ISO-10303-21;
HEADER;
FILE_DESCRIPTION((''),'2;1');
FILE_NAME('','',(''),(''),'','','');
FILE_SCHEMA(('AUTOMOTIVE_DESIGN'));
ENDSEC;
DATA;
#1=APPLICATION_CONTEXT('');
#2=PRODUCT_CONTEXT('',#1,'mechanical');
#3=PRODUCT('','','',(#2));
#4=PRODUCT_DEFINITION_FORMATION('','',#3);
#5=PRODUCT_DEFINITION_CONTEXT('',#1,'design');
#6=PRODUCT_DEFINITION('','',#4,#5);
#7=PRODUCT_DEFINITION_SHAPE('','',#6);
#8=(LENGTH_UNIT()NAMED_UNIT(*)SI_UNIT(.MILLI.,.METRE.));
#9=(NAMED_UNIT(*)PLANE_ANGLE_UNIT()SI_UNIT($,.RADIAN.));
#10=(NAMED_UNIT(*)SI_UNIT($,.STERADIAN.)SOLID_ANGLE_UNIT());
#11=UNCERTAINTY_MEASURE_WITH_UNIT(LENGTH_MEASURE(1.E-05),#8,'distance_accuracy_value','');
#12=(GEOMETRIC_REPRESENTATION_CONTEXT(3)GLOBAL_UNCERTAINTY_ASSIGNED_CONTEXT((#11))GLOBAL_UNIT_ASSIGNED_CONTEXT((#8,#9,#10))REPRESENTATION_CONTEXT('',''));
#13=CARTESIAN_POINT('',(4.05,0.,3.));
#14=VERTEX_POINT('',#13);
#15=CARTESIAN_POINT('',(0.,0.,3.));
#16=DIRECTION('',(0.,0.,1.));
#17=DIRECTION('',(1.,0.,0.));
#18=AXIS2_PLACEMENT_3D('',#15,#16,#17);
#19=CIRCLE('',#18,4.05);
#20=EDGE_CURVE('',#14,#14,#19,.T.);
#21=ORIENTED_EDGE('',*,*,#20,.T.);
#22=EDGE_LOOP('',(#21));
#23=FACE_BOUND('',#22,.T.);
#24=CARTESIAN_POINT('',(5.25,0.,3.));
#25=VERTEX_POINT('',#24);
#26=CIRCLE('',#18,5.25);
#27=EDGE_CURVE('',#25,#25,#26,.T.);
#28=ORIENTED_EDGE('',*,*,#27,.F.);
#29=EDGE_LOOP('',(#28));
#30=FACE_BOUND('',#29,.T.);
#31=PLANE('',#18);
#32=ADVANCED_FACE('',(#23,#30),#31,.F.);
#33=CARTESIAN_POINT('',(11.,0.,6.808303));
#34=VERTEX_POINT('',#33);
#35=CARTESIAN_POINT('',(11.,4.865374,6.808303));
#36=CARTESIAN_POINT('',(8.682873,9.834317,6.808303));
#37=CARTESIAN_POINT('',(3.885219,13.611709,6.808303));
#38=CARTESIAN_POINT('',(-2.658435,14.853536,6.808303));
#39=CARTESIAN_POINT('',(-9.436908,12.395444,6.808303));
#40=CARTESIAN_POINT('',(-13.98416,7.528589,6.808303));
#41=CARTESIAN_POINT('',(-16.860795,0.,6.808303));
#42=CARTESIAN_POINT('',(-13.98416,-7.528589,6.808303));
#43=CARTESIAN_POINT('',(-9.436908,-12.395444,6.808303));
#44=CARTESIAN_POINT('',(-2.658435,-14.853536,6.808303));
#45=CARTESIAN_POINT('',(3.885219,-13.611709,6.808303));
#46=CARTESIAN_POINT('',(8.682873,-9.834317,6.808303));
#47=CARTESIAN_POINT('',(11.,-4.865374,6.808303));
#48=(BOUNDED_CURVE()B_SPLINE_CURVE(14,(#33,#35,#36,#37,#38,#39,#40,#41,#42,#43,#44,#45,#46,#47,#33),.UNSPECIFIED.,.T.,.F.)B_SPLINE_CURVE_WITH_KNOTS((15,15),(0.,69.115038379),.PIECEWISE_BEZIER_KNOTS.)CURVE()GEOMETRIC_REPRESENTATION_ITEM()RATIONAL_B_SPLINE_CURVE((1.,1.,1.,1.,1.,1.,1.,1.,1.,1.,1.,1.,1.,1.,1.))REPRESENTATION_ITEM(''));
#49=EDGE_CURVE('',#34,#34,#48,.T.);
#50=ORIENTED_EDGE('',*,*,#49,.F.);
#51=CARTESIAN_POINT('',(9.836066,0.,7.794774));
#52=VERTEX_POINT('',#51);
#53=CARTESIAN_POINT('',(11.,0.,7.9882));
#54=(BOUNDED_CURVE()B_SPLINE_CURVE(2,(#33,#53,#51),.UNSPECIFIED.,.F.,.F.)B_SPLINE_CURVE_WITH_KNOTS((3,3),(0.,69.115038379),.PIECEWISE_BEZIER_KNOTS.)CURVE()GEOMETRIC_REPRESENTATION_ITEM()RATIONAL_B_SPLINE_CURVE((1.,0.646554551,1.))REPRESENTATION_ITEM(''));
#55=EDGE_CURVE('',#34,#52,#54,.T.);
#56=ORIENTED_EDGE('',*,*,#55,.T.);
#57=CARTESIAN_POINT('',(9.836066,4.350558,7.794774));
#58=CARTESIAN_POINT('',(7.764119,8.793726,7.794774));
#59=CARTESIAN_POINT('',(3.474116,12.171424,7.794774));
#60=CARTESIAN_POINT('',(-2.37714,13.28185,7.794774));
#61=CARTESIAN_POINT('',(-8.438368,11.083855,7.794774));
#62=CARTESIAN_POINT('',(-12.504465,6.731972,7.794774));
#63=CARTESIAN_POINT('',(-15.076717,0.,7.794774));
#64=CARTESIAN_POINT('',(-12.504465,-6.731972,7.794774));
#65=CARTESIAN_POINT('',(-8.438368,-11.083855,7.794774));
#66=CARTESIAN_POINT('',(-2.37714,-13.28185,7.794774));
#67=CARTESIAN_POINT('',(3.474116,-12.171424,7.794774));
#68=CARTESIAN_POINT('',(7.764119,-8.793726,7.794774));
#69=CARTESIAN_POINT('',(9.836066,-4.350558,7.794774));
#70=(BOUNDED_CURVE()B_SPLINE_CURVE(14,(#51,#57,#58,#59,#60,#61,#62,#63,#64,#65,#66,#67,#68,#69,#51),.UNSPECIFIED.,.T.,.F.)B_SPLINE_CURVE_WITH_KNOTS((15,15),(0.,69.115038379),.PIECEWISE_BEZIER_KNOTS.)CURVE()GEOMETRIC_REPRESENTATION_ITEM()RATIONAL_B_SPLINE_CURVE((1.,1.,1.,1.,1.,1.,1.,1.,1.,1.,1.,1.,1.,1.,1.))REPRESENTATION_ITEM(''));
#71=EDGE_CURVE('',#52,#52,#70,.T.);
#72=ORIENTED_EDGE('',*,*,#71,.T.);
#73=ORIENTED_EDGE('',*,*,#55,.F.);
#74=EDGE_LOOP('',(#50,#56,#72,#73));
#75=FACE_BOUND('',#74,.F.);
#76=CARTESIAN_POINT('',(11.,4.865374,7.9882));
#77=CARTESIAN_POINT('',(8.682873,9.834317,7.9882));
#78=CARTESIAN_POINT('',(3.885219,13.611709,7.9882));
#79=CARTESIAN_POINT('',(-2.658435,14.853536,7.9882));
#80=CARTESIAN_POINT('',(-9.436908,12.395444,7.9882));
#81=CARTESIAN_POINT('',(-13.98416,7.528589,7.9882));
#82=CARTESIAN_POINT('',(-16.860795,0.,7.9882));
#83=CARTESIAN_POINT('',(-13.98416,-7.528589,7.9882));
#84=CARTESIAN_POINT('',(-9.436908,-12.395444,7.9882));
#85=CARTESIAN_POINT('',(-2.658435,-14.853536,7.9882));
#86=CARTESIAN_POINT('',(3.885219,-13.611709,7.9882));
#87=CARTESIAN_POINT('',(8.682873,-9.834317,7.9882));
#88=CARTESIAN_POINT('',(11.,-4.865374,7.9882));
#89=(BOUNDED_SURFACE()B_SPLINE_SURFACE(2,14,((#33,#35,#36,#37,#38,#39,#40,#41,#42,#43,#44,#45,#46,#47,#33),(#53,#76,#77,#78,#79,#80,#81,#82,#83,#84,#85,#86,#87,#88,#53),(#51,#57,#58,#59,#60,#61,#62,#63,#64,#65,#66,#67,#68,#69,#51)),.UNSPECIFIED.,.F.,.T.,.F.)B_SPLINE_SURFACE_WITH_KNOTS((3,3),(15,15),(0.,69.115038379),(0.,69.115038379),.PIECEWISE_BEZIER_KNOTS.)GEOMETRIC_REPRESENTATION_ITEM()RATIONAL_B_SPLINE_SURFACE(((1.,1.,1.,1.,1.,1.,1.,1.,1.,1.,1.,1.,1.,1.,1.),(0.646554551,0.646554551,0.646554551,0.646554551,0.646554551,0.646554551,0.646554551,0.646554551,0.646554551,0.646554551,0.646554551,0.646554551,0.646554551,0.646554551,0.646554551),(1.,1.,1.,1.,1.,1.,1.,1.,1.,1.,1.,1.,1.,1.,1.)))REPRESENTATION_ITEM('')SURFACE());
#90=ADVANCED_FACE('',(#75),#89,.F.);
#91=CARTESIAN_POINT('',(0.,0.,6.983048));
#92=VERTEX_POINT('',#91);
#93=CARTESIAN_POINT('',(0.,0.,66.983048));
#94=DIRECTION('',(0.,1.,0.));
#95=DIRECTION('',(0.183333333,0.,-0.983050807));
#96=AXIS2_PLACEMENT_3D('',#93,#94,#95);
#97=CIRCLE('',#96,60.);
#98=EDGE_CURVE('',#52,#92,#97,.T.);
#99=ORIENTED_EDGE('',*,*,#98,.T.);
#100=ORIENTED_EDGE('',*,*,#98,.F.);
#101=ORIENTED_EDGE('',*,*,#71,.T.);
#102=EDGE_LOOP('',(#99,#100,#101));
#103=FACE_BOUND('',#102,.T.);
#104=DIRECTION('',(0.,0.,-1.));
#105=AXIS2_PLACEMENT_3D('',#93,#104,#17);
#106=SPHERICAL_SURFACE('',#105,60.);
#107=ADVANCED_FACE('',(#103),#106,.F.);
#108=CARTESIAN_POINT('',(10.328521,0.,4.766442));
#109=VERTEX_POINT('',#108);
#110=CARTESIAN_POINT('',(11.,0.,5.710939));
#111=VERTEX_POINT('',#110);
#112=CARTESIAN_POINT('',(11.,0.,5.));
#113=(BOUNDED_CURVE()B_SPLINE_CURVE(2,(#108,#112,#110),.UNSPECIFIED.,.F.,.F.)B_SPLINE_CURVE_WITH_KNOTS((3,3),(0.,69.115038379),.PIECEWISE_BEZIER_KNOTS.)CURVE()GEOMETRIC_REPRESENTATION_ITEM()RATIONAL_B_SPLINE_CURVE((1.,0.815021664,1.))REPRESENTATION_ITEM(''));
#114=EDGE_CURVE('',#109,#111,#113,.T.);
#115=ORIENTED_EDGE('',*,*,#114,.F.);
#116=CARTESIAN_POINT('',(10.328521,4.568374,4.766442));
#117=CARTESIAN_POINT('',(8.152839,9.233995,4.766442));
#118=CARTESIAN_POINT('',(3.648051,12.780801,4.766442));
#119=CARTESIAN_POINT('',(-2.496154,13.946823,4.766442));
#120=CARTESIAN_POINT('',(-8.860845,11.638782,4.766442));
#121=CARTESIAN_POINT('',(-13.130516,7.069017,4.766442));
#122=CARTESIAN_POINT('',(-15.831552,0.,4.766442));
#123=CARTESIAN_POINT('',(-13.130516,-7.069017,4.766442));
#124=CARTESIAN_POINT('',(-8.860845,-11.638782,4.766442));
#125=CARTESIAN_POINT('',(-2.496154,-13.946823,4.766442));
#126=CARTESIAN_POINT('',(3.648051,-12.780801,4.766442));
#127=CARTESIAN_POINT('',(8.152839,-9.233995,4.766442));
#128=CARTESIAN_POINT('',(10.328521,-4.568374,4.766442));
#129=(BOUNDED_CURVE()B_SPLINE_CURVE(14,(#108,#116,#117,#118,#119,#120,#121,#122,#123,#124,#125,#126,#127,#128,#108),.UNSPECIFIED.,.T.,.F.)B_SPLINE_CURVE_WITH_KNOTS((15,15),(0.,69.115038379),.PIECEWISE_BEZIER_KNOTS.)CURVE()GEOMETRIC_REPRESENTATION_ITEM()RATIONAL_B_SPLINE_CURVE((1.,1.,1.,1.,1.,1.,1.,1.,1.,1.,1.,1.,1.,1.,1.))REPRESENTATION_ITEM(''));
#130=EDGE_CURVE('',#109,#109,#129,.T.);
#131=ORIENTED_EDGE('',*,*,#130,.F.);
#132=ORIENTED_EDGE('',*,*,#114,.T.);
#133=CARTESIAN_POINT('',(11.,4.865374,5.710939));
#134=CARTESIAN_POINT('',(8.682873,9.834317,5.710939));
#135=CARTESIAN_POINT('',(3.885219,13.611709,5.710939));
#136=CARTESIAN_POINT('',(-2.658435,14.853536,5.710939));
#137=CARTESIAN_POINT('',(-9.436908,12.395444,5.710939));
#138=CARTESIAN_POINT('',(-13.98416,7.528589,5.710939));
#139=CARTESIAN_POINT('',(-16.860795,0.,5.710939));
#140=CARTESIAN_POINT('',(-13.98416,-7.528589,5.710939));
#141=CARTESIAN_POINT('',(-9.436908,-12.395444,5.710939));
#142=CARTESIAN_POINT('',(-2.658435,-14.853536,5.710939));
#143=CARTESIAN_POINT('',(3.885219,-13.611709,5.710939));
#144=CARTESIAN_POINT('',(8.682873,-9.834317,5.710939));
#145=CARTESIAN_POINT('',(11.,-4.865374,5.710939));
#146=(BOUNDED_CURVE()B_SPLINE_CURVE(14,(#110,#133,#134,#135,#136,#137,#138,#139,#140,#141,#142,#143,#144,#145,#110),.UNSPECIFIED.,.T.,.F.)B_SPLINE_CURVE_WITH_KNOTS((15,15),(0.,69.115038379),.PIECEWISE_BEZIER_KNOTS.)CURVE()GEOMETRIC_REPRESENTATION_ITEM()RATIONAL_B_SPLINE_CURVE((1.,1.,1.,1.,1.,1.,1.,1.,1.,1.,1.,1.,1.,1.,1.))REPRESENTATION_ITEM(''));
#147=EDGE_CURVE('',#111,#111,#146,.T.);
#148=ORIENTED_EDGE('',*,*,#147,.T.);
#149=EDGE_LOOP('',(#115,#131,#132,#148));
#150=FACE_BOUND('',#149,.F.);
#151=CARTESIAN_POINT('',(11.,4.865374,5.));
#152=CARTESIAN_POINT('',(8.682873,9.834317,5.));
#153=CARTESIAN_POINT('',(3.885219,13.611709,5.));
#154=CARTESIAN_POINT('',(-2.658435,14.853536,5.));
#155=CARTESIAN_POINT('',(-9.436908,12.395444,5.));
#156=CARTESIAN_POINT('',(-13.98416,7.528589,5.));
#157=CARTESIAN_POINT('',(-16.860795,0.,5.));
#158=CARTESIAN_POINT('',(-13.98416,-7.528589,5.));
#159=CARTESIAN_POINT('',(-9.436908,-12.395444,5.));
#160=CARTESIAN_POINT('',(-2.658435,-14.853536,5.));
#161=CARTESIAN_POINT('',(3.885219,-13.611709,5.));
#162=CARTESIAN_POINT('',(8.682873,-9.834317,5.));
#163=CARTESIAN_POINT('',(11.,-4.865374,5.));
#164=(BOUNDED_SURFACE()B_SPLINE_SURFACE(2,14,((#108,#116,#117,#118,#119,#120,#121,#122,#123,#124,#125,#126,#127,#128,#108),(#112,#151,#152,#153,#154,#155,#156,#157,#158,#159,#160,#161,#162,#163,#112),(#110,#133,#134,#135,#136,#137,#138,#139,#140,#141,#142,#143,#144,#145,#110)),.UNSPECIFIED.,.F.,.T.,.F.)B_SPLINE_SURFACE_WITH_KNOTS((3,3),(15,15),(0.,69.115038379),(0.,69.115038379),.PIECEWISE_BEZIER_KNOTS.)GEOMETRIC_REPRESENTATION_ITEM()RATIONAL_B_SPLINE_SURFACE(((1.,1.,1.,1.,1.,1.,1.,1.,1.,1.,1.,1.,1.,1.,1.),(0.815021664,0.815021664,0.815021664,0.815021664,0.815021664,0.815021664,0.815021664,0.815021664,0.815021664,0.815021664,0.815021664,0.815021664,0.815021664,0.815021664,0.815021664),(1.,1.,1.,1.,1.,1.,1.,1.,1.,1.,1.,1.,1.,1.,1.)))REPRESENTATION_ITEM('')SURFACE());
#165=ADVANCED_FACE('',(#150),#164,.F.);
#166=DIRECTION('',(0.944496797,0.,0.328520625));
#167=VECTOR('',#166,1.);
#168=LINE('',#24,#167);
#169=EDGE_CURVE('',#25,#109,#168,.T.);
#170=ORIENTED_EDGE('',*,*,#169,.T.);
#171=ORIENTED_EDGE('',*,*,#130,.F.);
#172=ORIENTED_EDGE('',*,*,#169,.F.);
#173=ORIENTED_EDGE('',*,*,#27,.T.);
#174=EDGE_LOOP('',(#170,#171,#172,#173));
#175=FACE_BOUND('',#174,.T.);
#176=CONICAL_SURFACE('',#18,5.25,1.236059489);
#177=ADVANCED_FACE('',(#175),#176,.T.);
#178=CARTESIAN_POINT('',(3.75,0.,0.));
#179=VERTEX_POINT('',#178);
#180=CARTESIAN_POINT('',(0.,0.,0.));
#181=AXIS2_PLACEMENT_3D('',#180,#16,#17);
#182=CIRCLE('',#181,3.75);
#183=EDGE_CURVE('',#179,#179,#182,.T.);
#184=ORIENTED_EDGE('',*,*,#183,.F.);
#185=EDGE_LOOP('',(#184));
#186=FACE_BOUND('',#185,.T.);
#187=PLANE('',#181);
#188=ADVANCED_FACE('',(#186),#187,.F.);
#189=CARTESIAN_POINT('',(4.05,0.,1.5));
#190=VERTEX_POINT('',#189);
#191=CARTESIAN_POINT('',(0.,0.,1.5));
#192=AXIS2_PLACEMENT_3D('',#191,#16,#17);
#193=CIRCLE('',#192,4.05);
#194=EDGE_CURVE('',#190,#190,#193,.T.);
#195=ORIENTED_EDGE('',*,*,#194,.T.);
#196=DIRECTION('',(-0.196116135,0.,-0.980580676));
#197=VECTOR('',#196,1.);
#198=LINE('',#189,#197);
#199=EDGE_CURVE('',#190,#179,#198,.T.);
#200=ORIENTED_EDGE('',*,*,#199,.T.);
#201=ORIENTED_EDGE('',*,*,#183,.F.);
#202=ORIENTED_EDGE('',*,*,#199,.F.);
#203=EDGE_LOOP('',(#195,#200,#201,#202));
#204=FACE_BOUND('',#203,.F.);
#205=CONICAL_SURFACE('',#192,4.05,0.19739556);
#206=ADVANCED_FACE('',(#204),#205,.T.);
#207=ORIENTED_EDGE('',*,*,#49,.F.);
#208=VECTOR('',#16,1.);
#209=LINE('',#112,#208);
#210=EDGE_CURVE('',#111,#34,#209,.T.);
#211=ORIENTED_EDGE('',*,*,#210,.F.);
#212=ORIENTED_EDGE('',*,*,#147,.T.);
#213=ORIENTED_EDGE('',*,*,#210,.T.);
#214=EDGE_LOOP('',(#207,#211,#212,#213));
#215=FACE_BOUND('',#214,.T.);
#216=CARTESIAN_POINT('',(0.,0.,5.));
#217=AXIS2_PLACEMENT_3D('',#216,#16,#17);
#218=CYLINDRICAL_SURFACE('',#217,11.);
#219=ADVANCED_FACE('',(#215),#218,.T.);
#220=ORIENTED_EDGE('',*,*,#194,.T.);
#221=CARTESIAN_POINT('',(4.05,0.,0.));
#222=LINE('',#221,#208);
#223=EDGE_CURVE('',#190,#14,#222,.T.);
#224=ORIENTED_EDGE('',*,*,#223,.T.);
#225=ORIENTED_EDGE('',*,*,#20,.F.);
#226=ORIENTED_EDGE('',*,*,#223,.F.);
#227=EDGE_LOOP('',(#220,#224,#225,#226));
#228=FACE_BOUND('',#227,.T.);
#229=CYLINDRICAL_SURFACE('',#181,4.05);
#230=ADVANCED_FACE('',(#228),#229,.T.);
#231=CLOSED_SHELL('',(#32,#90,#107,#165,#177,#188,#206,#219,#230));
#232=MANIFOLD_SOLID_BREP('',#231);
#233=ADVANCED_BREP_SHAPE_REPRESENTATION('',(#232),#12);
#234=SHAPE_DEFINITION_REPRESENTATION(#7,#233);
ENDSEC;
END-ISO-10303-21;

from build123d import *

# Parameters (mm, degrees)
F2_R = 1


# Not quite as in the source:
# - a fillet or chamfer that OpenCascade refuses, or shapes differently, is made with other operations: its cross-section is extruded or revolved along the edge and cut away or added


with BuildPart() as f1:
    # F0 (on Front) → F1 (revolve)
    with BuildSketch(Plane.XZ):
        with BuildLine():
            Line((0, 6.9830484122), (0, 0))
            Line((0, 0), (4.05, 0))
            Line((4.05, 0), (4.05, 3))
            Line((4.05, 3), (5.25, 3))
            Line((5.25, 3), (11, 5))
            Line((11, 5), (11, 8))
            ThreePointArc((11, 8), (5.5234543207, 7.2378272446), (0, 6.9830484122))
        make_face()
    revolve(axis=Axis((0, 0, 1.772551451), (0, 0, 1)))

    # F2
    f2_edges = [f1.edges().sort_by_distance(p)[0] for p in [
        (-11, 0, 5),
        (-11, 0, 8),
    ]]
    fillet(f2_edges, radius=F2_R)

    # F3: chamfer of 0.3 x 1.5 on 1 edges, made by hand

    # F3_s1 → F3_t2 (revolve, cut)
    with BuildSketch(Plane.XZ):
        Polygon((4.05, 1.5), (3.75, 0), (4.05, 0), align=None)
    revolve(axis=Axis((0, 0, 0), (0, 0, 1)), mode=Mode.SUBTRACT)


solid = f1.part
